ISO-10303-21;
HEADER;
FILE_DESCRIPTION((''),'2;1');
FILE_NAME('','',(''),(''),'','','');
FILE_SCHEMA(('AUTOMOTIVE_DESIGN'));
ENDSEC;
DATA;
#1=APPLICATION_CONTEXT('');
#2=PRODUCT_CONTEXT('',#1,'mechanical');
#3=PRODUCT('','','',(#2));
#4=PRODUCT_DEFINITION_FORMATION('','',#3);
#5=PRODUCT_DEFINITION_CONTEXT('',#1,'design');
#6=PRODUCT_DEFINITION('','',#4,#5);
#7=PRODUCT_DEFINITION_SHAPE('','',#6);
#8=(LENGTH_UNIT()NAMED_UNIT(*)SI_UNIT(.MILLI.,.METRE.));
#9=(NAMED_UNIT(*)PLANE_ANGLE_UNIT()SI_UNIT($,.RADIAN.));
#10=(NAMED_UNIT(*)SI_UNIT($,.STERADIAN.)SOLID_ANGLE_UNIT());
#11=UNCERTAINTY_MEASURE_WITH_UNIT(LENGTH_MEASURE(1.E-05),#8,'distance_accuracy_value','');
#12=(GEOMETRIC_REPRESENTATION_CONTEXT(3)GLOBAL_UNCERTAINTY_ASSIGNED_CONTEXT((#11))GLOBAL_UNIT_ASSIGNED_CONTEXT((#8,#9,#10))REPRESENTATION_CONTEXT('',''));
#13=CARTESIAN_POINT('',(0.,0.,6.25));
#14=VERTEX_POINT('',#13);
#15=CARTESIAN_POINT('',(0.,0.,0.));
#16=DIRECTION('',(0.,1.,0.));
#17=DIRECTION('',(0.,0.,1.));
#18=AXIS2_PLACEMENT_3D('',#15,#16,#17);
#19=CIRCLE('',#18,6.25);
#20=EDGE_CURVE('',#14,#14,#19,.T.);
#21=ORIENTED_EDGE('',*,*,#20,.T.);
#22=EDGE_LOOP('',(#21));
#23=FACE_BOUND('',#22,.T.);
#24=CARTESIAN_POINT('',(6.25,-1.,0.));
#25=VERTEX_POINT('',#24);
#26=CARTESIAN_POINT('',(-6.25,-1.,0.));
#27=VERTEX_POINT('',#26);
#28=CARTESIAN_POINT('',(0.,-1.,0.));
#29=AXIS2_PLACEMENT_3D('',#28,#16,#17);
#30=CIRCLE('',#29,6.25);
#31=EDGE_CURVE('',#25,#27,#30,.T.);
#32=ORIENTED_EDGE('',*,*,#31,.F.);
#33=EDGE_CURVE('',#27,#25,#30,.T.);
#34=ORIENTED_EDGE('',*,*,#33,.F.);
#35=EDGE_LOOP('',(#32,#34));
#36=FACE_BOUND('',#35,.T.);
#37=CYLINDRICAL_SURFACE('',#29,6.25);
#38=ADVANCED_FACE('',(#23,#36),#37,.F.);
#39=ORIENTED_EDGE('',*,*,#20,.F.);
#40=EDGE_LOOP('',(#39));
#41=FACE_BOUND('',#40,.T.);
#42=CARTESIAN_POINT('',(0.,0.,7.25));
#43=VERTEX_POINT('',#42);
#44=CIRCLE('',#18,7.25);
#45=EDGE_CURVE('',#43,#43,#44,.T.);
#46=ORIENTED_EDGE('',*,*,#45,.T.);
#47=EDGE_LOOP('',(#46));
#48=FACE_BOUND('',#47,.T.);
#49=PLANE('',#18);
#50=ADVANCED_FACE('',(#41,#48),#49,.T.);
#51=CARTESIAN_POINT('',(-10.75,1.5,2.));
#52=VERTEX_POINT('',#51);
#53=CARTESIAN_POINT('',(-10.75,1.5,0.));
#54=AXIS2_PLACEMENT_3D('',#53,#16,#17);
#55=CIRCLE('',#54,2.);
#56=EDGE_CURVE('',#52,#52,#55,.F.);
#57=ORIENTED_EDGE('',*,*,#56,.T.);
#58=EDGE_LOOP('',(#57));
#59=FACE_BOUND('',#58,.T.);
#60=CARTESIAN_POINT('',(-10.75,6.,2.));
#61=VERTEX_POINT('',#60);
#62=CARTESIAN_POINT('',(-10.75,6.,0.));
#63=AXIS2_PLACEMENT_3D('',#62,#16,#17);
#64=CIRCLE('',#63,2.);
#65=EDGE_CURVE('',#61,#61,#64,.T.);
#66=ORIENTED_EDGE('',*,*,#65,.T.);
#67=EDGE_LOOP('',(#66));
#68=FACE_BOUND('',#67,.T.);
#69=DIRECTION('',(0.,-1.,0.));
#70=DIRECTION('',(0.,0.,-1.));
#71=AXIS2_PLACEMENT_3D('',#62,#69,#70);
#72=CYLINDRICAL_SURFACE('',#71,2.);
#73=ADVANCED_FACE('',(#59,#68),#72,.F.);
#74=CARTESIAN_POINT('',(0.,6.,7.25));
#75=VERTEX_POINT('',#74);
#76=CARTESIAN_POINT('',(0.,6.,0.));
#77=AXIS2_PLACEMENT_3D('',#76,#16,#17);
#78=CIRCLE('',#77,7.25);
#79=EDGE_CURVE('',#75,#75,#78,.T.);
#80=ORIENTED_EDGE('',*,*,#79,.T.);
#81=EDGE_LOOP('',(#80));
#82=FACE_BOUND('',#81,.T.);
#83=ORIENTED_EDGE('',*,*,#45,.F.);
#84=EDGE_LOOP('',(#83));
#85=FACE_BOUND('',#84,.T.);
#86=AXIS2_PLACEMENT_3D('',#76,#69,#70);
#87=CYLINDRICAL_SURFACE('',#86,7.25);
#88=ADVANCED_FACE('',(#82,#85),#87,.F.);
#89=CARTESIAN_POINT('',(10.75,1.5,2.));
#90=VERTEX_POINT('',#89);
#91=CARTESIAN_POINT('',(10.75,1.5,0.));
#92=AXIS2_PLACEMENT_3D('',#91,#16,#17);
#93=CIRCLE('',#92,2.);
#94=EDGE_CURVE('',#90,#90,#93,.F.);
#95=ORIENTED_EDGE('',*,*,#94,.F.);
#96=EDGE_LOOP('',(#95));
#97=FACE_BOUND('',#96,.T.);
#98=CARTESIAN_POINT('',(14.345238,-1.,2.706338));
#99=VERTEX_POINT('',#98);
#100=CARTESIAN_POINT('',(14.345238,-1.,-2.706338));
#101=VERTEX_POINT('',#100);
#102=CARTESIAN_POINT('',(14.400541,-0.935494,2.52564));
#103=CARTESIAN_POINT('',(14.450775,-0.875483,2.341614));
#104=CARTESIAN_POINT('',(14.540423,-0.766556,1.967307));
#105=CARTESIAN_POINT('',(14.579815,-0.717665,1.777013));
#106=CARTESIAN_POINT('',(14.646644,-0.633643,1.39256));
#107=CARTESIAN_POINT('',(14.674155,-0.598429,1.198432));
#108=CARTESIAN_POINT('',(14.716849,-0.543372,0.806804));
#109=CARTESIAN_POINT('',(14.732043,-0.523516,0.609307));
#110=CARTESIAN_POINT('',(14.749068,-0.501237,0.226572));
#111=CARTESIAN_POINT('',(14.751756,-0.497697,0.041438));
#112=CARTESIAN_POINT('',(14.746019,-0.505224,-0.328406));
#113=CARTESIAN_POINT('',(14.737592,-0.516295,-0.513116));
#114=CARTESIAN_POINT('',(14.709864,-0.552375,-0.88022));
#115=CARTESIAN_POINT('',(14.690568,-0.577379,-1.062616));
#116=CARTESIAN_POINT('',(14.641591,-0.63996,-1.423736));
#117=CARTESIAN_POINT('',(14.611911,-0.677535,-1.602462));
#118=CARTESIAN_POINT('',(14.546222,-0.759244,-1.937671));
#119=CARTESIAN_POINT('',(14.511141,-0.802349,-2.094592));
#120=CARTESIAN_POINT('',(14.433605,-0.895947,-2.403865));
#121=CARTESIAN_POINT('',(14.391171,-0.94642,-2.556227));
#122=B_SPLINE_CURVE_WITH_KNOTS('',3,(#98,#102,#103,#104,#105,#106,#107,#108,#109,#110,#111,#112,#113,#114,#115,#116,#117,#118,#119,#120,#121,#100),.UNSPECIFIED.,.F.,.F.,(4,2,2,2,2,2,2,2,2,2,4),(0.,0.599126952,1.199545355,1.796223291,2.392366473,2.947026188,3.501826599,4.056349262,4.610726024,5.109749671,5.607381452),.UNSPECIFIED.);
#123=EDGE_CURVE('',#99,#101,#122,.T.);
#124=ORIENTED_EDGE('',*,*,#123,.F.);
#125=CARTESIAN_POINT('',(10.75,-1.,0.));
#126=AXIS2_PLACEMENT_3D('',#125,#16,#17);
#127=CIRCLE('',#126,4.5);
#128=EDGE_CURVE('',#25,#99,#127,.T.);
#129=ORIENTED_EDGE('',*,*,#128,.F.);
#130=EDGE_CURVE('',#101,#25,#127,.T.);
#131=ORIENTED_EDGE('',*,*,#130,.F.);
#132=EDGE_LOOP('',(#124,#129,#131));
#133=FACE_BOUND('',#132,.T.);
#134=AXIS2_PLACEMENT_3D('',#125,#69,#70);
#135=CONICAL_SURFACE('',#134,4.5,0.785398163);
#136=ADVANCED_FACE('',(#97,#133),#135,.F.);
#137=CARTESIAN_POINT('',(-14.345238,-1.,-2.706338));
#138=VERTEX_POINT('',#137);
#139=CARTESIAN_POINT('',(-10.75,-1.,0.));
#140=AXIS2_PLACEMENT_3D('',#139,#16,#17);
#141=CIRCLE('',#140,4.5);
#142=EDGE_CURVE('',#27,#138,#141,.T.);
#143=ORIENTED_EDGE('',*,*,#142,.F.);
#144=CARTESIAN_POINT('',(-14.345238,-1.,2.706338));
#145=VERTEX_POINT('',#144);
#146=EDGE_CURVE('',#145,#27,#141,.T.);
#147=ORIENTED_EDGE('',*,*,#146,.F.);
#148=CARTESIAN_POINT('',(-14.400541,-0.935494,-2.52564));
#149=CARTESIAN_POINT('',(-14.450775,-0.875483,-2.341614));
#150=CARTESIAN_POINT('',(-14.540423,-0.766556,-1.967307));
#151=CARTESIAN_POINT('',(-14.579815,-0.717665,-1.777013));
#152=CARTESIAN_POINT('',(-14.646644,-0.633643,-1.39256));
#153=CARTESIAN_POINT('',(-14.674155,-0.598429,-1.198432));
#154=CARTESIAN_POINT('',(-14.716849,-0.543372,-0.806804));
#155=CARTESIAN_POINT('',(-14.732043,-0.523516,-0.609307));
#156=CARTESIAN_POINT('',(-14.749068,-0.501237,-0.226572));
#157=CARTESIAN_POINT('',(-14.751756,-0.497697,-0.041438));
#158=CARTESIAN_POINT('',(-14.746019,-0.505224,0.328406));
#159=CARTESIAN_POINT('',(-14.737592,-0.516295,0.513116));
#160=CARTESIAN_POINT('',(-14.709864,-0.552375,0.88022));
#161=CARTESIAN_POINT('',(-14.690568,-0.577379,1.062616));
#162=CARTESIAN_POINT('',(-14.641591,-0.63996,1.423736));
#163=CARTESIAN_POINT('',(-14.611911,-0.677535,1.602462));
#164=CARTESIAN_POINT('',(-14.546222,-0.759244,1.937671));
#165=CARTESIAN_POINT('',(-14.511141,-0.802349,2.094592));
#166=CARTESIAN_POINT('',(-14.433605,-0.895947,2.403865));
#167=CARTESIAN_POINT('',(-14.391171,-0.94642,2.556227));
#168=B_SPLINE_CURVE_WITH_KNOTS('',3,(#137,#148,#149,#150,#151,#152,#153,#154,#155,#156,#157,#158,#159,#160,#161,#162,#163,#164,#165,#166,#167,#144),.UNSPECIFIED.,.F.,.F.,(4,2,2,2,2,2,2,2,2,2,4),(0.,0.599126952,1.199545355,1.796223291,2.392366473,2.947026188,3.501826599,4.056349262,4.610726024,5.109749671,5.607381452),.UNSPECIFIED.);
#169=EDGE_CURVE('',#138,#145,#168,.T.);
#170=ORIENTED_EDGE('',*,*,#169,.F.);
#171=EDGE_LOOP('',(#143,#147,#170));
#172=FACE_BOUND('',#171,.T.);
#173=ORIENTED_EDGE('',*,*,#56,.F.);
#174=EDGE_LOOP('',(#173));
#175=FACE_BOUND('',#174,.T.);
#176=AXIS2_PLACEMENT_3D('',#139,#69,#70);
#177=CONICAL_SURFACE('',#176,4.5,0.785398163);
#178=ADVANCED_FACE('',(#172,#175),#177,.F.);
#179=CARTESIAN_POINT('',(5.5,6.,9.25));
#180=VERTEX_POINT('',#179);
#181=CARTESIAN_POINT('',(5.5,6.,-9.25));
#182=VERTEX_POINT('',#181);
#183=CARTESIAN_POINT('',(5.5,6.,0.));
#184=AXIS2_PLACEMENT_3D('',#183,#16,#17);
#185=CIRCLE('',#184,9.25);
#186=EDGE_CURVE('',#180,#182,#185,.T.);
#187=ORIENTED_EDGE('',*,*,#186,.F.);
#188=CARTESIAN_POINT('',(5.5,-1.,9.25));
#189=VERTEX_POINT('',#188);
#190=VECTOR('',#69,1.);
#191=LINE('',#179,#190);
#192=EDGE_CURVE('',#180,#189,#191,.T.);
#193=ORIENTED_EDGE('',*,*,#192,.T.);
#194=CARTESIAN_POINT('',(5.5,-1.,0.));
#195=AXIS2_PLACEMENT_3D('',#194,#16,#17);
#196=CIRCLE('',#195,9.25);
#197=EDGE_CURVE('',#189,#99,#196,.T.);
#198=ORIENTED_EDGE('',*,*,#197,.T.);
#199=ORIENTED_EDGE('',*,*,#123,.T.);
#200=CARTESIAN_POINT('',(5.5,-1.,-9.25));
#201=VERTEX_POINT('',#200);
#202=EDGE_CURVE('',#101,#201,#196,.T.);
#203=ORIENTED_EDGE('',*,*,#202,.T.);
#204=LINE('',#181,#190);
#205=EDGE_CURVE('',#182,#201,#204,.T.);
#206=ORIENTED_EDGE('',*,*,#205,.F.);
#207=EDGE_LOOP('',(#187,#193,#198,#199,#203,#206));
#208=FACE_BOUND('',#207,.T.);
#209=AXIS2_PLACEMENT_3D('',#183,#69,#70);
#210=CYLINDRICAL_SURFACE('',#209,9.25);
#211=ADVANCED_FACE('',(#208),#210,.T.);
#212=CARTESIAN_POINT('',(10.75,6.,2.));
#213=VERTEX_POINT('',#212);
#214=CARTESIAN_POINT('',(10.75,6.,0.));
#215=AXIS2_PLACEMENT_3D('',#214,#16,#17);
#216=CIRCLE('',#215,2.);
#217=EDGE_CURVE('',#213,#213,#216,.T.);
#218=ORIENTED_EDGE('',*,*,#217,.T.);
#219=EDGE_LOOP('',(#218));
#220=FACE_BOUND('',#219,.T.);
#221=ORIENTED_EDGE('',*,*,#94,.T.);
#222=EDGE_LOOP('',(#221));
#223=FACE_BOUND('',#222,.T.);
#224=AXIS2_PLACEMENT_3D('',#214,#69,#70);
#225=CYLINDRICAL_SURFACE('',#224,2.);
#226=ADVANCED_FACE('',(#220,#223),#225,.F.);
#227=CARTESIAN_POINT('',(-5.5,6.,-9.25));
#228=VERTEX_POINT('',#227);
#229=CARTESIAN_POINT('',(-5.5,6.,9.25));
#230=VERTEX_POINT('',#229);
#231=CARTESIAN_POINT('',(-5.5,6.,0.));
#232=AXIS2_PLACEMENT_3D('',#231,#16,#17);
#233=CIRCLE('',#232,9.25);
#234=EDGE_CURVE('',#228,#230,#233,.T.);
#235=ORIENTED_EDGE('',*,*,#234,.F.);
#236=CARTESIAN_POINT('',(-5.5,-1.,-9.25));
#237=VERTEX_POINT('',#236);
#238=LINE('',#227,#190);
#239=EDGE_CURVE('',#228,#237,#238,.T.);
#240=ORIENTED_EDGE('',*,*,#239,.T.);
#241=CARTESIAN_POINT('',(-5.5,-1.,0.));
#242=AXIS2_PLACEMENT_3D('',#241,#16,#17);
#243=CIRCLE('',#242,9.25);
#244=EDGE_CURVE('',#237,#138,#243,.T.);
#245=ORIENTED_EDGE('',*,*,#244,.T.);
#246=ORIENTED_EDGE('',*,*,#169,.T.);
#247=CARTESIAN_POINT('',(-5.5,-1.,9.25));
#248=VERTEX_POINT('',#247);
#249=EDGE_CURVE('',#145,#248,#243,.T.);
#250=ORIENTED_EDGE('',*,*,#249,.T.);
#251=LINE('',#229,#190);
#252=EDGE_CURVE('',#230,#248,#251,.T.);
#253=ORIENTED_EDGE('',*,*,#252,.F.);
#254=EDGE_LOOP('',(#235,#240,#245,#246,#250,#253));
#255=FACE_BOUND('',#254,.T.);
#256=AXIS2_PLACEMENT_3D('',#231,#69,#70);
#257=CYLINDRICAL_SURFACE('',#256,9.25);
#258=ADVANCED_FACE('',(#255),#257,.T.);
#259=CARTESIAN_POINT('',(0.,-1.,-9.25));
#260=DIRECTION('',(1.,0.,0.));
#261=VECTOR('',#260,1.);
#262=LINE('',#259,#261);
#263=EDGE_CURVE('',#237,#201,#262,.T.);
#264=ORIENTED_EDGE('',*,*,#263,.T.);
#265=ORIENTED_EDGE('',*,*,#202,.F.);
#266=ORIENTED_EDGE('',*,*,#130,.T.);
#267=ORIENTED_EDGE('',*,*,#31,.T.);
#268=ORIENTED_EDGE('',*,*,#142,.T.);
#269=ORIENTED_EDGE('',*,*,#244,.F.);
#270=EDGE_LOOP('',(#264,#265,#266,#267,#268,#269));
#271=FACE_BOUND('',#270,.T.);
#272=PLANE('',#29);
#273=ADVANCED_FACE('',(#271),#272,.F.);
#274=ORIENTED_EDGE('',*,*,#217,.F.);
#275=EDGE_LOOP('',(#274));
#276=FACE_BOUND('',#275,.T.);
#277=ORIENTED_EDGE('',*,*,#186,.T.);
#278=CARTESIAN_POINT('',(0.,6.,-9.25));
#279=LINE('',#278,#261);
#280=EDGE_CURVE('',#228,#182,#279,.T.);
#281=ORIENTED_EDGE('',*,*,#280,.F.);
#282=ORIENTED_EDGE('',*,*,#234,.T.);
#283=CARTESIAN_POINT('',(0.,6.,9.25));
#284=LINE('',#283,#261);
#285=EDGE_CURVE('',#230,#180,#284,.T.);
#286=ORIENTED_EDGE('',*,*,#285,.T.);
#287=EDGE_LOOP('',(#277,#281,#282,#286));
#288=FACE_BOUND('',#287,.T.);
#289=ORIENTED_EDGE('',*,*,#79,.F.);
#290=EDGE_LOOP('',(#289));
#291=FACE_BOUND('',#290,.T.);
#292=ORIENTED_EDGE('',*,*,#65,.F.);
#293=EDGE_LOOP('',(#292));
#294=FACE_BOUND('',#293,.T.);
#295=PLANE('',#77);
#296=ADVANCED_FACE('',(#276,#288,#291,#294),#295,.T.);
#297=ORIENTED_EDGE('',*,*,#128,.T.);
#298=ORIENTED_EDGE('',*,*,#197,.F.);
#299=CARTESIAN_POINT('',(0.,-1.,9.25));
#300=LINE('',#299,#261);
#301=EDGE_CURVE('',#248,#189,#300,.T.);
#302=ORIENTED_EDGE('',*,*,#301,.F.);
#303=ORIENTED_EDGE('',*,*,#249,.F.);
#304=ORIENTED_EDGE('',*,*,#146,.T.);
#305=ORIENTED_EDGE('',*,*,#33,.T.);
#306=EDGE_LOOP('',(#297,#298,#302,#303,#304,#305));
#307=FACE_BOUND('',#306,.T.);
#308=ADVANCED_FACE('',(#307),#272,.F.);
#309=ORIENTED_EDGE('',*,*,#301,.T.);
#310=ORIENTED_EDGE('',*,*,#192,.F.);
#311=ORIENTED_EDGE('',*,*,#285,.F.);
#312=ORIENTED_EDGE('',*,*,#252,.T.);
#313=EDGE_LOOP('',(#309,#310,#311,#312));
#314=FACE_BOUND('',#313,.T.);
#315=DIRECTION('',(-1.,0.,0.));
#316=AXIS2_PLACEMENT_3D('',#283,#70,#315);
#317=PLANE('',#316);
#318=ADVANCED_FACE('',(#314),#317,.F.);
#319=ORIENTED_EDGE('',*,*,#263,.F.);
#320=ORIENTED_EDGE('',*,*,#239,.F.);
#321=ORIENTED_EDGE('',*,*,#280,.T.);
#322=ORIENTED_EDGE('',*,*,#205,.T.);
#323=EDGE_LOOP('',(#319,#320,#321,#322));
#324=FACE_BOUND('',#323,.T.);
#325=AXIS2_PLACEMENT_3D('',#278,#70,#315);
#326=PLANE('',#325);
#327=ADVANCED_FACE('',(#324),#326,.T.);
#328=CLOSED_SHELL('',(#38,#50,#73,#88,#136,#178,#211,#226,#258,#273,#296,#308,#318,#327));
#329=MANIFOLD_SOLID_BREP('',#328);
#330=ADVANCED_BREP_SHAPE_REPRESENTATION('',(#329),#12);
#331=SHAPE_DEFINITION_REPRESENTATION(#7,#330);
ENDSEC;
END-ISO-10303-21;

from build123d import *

# Parameters (mm, degrees)
SKETCH1_R           = 2
SKETCH1_R_2         = 7.25
BOSS_EXTRUDE1_DEPTH = 6
BOSS_EXTRUDE2_START = -1
SKETCH1_3_R         = 2
SKETCH1_3_R_2       = 7.25
SKETCH1_3_R_3       = 6.25
BOSS_EXTRUDE2_DEPTH = 1
CHAMFER1_SIZE       = 2.5


with BuildPart() as part:
    # Sketch1 → Boss-Extrude1 (new body)
    with BuildSketch(Plane(origin=(0, 0, 0), x_dir=(1, 0, 0), z_dir=(0, 1, 0))):
        with BuildLine():
            Line((-5.5, -9.25), (5.5, -9.25))
            ThreePointArc((5.5, -9.25), (14.75, 0), (5.5, 9.25))
            Line((5.5, 9.25), (-5.5, 9.25))
            ThreePointArc((-5.5, 9.25), (-14.75, 0), (-5.5, -9.25))
        make_face()
        with Locations(Location((10.75, 0, 0), (0, 0, 270))):
            Circle(SKETCH1_R, mode=Mode.SUBTRACT)
        with Locations(Location((0, 0, 0), (0, 0, 270))):
            Circle(SKETCH1_R_2, mode=Mode.SUBTRACT)
        with Locations(Location((-10.75, 0, 0), (0, 0, 270))):
            Circle(SKETCH1_R, mode=Mode.SUBTRACT)
    extrude(amount=BOSS_EXTRUDE1_DEPTH)

    # Sketch1<3> → Boss-Extrude2 (add)
    # profile 1 of 2: a face of its own
    with BuildSketch(Plane(origin=(0, 0, 0), x_dir=(1, 0, 0), z_dir=(0, 1, 0)).offset(BOSS_EXTRUDE2_START)):
        with BuildLine():
            Line((-5.5, -9.25), (5.5, -9.25))
            ThreePointArc((5.5, -9.25), (14.75, 0), (5.5, 9.25))
            Line((5.5, 9.25), (-5.5, 9.25))
            ThreePointArc((-5.5, 9.25), (-14.75, 0), (-5.5, -9.25))
        make_face()
        with Locations(Location((10.75, 0, 0), (0, 0, 270))):
            Circle(SKETCH1_3_R, mode=Mode.SUBTRACT)
        with Locations(Location((0, 0, 0), (0, 0, 270))):
            Circle(SKETCH1_3_R_2, mode=Mode.SUBTRACT)
        with Locations(Location((-10.75, 0, 0), (0, 0, 270))):
            Circle(SKETCH1_3_R, mode=Mode.SUBTRACT)
    # profile 2 of 2: a face of its own
    with BuildSketch(Plane(origin=(0, 0, 0), x_dir=(1, 0, 0), z_dir=(0, 1, 0)).offset(BOSS_EXTRUDE2_START)):
        with Locations(Location((0, 0, 0), (0, 0, 270))):
            Circle(SKETCH1_3_R_2)
        with Locations(Location((0, 0, 0), (0, 0, 270))):
            Circle(SKETCH1_3_R_3, mode=Mode.SUBTRACT)
    extrude(amount=BOSS_EXTRUDE2_DEPTH)

    # Chamfer1
    # the kernel refuses this chamfer: 2.5 mm, written as the material it takes off along each edge
    with BuildSketch(Plane(origin=(10.75, -1, 0), x_dir=(0, 0, 1), z_dir=(-1, 0, 0))) as chamfer1_piece_1:
        Polygon((2 + CHAMFER1_SIZE, 0), (2, CHAMFER1_SIZE), (2, 0), align=None)
    revolve(axis=Axis((10.75, -1, 0), (0, 1, 0)), mode=Mode.SUBTRACT)
    with BuildSketch(Plane(origin=(-10.75, -1, 0), x_dir=(0, 0, 1), z_dir=(-1, 0, 0))) as chamfer1_piece_2:
        Polygon((2 + CHAMFER1_SIZE, 0), (2, CHAMFER1_SIZE), (2, 0), align=None)
    revolve(axis=Axis((-10.75, -1, 0), (0, 1, 0)), mode=Mode.SUBTRACT)


solid = part.part
